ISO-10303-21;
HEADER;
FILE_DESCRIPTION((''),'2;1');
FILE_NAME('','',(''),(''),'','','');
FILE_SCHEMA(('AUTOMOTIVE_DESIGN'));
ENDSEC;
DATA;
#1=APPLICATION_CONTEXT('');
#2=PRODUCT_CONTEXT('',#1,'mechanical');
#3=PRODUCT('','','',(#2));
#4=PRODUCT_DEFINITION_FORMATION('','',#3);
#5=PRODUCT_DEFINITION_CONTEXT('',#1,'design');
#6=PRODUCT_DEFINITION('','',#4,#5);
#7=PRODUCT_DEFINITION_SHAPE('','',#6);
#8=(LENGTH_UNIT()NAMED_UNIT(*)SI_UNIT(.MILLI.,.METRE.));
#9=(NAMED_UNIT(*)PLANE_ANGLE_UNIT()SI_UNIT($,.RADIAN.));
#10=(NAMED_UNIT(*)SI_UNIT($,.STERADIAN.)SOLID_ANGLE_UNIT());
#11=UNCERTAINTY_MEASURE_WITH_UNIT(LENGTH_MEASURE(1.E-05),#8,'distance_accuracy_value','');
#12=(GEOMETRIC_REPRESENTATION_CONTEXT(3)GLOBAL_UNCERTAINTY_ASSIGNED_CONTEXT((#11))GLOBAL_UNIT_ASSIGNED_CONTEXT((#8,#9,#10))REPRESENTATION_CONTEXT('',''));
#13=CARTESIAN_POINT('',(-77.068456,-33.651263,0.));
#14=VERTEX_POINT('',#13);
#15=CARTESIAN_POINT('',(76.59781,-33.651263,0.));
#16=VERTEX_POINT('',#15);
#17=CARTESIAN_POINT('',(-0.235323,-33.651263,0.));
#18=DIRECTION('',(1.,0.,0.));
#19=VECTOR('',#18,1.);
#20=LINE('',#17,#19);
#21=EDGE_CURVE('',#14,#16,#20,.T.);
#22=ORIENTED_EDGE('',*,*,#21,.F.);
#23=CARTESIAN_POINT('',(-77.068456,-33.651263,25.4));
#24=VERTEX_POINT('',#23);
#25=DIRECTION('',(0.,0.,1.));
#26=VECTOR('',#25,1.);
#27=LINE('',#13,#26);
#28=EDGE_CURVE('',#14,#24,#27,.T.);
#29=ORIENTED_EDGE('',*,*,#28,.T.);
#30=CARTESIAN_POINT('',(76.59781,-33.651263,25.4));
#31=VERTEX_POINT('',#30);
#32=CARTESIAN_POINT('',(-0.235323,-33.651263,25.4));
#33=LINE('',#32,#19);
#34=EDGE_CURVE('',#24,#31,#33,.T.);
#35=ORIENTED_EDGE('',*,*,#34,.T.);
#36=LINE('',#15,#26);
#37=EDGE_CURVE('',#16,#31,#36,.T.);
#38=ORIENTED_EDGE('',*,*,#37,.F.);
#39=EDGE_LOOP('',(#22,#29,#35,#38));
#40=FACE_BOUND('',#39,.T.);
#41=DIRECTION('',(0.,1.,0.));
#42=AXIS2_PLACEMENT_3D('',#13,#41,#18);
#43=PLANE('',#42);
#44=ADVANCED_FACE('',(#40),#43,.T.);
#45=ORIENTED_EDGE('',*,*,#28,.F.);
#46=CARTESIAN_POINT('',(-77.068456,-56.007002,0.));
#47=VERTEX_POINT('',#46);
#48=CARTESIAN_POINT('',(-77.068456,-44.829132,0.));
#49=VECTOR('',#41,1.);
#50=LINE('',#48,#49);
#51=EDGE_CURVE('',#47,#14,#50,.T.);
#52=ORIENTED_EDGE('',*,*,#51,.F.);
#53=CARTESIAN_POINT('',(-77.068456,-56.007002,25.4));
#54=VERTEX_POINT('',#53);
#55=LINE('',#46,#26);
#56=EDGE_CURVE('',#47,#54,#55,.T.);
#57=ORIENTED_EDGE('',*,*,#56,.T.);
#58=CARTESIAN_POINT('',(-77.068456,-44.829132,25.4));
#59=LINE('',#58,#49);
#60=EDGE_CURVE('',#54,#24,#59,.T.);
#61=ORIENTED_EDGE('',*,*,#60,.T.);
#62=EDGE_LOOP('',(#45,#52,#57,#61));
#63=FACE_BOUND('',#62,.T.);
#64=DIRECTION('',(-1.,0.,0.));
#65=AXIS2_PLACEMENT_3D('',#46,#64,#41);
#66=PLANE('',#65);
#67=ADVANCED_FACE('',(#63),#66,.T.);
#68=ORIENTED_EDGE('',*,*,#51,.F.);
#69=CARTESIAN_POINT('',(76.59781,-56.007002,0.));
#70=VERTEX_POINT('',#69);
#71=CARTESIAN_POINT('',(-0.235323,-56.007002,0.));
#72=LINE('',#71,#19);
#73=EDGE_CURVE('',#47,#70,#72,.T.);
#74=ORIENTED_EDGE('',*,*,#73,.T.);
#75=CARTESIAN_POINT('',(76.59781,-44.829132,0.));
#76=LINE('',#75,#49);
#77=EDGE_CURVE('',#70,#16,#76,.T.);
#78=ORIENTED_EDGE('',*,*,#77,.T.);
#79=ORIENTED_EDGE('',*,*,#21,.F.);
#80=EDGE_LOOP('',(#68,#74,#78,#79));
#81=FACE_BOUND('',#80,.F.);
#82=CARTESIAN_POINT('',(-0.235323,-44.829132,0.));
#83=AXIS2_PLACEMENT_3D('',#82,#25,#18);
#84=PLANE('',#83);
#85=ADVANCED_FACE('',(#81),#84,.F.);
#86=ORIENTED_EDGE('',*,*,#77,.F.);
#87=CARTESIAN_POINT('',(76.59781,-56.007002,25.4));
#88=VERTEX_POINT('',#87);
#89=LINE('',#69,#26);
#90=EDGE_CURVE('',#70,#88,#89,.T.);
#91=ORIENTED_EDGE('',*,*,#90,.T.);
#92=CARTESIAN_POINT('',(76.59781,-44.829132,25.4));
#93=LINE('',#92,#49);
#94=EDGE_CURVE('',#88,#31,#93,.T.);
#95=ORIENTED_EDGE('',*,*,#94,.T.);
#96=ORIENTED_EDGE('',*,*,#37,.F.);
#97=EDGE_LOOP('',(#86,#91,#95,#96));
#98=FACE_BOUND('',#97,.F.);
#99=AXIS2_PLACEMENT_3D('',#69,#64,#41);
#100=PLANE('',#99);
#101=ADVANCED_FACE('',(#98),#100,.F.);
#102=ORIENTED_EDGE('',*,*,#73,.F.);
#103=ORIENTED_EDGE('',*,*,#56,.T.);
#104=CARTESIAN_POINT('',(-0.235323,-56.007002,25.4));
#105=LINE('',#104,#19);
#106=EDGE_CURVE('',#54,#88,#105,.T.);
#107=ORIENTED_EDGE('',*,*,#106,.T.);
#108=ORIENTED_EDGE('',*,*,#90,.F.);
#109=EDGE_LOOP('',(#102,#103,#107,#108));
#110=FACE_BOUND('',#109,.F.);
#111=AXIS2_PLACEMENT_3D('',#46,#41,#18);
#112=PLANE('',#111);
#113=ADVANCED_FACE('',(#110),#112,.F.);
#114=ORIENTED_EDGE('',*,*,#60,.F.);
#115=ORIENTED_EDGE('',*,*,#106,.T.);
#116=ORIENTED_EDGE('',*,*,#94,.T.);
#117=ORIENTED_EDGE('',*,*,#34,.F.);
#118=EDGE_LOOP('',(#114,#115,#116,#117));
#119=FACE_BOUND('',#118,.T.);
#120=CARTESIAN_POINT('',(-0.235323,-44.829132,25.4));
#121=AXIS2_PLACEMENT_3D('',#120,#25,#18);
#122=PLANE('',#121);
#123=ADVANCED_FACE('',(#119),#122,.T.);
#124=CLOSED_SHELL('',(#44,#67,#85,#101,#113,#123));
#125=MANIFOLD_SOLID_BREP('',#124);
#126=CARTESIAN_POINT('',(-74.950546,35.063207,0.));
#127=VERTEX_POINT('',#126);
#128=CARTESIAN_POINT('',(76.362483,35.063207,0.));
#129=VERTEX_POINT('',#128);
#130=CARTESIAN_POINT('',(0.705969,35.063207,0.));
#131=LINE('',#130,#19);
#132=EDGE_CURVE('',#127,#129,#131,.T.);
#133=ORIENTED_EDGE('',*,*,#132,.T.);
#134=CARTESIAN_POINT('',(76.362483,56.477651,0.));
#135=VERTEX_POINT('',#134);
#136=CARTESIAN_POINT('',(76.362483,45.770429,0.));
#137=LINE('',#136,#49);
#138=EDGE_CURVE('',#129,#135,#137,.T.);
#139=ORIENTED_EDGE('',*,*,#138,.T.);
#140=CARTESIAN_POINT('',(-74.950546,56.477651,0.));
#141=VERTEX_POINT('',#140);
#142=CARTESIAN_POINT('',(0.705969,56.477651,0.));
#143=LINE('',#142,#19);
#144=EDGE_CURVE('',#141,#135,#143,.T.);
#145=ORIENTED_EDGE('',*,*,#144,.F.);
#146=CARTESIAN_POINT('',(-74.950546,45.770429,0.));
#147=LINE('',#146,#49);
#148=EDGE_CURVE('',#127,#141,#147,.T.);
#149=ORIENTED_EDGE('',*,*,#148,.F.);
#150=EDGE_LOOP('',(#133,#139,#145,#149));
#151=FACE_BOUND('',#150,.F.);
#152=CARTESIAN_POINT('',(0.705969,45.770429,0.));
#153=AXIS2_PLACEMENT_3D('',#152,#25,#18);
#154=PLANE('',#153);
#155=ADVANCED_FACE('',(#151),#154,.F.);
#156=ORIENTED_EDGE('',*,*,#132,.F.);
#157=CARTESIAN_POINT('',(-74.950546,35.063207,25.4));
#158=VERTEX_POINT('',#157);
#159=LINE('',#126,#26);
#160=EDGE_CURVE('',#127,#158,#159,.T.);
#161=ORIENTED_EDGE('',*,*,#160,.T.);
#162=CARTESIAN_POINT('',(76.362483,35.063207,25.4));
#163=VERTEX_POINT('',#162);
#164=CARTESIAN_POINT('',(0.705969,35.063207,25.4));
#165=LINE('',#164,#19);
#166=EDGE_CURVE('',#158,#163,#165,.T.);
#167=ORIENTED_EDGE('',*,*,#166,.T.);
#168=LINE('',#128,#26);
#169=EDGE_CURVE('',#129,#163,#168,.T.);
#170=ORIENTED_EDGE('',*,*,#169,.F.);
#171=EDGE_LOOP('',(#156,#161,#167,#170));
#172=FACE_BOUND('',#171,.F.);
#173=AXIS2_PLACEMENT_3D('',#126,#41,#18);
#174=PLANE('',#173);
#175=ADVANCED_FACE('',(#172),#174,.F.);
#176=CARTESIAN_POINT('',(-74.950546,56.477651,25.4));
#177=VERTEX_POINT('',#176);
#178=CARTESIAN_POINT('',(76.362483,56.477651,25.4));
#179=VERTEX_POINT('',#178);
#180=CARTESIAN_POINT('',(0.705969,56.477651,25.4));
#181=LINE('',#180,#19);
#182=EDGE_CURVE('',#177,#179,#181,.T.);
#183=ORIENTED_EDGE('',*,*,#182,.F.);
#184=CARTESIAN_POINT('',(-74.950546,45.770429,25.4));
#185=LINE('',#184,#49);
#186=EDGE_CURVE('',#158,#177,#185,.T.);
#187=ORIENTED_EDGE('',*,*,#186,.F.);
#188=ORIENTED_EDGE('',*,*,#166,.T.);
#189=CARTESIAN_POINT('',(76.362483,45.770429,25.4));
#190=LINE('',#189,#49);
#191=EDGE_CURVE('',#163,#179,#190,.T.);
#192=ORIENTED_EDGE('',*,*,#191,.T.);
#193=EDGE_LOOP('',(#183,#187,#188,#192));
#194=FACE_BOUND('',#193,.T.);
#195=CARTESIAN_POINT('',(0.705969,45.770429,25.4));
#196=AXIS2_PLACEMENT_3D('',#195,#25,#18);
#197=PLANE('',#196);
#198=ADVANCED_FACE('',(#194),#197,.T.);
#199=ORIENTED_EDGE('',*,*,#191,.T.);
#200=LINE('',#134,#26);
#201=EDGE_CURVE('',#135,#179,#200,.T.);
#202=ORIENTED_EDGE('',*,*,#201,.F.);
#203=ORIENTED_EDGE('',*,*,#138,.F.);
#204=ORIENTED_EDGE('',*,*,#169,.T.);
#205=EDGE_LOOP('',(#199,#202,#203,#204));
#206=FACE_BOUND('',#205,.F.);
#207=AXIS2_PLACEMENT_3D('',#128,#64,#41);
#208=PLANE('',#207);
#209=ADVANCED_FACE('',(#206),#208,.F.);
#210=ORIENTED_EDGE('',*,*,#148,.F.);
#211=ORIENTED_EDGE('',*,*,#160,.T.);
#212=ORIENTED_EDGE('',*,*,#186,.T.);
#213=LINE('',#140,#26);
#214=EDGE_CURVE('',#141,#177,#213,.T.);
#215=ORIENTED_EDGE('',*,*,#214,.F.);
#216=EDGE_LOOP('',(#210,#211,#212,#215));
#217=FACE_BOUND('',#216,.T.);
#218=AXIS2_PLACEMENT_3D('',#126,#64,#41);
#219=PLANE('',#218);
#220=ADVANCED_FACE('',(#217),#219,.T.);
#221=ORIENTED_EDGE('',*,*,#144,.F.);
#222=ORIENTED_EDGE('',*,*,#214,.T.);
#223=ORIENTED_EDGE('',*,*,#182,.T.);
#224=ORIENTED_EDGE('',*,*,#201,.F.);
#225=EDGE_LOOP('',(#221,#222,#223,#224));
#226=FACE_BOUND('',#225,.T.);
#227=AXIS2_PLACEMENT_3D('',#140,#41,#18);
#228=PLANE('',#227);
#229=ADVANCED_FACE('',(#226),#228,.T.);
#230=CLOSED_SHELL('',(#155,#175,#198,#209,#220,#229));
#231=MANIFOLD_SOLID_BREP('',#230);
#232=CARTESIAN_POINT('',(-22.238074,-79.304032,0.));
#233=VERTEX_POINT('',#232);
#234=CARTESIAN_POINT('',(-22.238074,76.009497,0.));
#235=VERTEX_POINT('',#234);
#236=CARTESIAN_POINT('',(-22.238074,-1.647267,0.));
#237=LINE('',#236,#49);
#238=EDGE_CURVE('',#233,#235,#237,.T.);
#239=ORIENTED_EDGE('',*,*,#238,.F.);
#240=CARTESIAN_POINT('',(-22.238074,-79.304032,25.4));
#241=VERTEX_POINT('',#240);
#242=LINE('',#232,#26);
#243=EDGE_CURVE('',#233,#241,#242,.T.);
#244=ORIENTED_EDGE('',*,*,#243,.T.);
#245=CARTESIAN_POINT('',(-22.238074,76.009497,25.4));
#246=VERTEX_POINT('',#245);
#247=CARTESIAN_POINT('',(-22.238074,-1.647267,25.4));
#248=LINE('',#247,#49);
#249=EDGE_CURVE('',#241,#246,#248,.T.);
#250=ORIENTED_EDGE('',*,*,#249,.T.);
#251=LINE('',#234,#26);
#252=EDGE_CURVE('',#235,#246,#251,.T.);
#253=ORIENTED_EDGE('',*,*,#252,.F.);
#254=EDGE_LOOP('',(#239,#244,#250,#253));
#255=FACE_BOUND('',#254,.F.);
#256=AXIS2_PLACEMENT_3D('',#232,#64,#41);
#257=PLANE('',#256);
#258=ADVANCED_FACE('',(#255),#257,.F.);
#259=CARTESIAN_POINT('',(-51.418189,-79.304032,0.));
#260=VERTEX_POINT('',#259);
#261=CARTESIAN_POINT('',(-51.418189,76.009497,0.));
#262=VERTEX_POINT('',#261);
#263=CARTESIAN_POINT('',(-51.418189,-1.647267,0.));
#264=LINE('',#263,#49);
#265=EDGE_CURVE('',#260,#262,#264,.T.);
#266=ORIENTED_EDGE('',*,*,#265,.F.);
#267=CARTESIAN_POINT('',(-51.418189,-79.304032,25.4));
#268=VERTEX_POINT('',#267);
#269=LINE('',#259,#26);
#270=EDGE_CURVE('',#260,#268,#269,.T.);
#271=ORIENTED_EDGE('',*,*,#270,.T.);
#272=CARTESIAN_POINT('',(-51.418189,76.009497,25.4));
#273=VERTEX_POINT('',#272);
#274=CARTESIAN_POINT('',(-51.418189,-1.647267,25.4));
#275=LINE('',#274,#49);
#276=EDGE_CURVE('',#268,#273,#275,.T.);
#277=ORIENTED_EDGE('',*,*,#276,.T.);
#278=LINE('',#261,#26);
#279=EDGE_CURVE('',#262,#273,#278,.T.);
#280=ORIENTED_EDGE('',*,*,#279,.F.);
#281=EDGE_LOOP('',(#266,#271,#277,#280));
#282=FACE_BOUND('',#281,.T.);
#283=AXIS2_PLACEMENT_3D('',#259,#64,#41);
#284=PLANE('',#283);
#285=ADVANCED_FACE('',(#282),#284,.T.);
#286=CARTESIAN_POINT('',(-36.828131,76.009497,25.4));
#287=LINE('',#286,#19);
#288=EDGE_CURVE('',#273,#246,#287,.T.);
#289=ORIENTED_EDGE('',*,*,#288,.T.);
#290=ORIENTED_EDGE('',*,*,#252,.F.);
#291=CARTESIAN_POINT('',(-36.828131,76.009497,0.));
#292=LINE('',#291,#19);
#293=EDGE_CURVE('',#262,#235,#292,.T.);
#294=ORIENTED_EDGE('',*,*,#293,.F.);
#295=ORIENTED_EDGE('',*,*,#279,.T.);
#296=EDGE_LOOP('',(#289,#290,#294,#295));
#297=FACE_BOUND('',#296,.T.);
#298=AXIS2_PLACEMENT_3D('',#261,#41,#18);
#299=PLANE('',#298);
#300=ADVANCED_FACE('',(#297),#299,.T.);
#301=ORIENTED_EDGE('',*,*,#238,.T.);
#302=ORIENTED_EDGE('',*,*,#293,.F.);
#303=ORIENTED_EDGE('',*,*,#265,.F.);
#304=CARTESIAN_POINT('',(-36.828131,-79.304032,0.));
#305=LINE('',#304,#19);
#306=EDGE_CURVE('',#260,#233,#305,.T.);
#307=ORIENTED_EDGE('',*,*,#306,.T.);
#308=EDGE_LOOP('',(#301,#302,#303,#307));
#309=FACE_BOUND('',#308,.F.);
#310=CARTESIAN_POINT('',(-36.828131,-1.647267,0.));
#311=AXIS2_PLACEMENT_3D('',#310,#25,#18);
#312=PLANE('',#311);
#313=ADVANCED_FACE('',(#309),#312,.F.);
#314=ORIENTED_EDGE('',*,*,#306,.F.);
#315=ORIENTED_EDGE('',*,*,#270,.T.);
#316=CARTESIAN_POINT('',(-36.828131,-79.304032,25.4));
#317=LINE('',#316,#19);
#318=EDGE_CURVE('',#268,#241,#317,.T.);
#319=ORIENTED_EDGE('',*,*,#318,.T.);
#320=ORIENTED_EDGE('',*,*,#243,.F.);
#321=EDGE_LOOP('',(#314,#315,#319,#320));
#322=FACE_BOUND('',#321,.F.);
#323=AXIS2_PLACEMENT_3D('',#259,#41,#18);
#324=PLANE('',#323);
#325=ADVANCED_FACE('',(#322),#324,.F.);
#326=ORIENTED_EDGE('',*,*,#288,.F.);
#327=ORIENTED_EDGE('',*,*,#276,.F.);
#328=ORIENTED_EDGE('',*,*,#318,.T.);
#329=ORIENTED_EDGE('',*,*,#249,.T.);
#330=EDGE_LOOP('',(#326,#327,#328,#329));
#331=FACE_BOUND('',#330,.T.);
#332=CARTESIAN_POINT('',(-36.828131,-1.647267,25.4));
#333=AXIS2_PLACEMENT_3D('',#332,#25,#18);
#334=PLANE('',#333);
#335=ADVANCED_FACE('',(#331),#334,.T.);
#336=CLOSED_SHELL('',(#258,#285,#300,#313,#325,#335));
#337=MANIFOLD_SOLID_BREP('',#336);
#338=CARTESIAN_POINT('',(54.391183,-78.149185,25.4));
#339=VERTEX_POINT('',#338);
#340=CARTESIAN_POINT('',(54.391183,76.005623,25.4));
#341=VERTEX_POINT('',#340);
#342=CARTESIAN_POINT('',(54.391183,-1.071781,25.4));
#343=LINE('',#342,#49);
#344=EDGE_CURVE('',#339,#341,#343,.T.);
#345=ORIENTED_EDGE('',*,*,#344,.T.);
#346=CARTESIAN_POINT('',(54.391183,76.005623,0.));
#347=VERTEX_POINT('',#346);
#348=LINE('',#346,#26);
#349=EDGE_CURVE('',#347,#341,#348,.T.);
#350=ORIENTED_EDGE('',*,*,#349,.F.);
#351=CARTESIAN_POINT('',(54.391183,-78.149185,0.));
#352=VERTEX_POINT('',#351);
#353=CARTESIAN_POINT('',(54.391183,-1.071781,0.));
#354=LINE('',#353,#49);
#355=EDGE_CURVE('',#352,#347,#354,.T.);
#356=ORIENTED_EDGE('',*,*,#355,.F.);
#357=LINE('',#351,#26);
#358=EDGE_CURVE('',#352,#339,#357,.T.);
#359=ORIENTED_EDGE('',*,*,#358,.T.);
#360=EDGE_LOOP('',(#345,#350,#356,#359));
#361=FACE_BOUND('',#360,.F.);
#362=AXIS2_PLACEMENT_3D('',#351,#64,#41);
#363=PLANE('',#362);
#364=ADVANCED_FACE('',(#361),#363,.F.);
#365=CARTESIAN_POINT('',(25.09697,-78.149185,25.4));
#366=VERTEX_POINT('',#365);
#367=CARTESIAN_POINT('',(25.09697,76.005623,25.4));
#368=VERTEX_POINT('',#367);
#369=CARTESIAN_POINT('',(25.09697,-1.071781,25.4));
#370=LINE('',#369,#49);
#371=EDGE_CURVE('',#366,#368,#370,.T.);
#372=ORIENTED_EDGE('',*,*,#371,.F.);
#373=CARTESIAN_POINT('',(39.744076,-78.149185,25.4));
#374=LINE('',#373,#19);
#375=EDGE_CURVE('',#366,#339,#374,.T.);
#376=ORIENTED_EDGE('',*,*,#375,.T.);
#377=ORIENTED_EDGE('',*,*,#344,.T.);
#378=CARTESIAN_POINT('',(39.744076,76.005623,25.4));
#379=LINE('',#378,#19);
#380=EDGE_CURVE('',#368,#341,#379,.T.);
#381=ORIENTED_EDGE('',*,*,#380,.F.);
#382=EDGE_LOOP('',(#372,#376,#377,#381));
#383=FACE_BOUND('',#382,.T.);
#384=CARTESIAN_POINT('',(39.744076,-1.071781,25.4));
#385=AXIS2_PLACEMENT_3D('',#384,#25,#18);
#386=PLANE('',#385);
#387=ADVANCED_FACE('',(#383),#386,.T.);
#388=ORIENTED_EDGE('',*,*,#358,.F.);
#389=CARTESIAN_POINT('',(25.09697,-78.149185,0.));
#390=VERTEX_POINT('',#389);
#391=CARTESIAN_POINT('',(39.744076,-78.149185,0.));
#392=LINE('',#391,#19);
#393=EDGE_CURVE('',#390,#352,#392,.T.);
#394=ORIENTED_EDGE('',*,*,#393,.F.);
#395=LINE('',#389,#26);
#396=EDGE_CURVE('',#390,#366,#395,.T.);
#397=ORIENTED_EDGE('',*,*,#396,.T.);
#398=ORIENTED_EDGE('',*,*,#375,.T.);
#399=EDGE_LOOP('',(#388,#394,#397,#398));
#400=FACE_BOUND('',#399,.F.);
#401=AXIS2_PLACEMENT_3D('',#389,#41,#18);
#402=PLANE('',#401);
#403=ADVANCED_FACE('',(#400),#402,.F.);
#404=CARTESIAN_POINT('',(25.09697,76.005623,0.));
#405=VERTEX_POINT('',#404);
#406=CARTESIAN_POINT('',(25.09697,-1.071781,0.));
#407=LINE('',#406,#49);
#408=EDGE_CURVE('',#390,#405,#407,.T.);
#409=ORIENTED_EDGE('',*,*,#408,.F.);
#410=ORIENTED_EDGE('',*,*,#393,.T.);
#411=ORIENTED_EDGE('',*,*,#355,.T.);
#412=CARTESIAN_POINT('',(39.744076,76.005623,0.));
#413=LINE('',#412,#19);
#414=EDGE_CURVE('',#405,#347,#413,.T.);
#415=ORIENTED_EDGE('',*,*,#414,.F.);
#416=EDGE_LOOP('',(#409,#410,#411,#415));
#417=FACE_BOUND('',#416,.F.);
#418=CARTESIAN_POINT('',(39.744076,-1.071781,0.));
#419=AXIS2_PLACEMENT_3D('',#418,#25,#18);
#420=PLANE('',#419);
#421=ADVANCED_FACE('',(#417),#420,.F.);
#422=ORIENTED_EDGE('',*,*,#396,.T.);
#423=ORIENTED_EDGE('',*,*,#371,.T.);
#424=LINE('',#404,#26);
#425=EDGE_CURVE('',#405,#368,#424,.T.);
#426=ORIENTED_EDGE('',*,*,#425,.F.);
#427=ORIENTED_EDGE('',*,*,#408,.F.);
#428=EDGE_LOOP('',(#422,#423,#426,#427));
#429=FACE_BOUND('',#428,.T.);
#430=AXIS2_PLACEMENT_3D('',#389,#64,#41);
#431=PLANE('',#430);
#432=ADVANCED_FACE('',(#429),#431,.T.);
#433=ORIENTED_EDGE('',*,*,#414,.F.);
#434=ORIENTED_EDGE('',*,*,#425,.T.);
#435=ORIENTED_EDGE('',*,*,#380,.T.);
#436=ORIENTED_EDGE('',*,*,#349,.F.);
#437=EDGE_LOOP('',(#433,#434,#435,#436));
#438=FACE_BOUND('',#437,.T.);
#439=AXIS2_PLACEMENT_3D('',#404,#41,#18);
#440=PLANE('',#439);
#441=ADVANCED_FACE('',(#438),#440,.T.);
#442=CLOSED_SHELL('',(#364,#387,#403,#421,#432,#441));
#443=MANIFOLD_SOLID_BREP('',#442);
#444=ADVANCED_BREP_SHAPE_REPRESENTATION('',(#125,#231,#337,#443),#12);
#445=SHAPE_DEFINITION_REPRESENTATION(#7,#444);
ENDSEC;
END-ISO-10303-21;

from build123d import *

# Parameters (mm, degrees)
F1_W     = 151.3130292296
F1_H     = 21.4144438505
F2_DEPTH = 25.4
F3_W     = 153.6662653089
F3_H     = 22.3557390273
F4_DEPTH = 25.4
F5_W     = 29.1801150888
F5_H     = 155.3135290742
F6_DEPTH = 25.4
F7_W     = 29.2942132801
F7_H     = 154.1548073292
F8_DEPTH = 25.4


# Not quite as in the source:
# - a feature of the source that left no trace in its solid (it failed there, or was rolled back) is left out


with BuildPart() as f2:
    # F1 (on Top) → F2 (new body)
    with BuildSketch(Plane.XY):
        with Locations((0.7059685886, 45.7704290748)):
            Rectangle(F1_W, F1_H)
    extrude(amount=F2_DEPTH)


with BuildPart() as f4:
    # F3 (on Top) → F4 (new body)
    with BuildSketch(Plane.XY):
        with Locations((-0.2353228629, -44.8291320354)):
            Rectangle(F3_W, F3_H)
    extrude(amount=F4_DEPTH)


with BuildPart() as f6:
    # F5 (on Top) → F6 (new body)
    with BuildSketch(Plane.XY):
        with Locations((-36.8281314149, -1.6472674906)):
            Rectangle(F5_W, F5_H)
    extrude(amount=F6_DEPTH)


with BuildPart() as f8:
    # F7 (on Top) → F8 (new body)
    with BuildSketch(Plane.XY):
        with Locations((39.744076319, -1.07178092)):
            Rectangle(F7_W, F7_H)
    extrude(amount=F8_DEPTH)


solid = Compound([f2.part, f4.part, f6.part, f8.part])
